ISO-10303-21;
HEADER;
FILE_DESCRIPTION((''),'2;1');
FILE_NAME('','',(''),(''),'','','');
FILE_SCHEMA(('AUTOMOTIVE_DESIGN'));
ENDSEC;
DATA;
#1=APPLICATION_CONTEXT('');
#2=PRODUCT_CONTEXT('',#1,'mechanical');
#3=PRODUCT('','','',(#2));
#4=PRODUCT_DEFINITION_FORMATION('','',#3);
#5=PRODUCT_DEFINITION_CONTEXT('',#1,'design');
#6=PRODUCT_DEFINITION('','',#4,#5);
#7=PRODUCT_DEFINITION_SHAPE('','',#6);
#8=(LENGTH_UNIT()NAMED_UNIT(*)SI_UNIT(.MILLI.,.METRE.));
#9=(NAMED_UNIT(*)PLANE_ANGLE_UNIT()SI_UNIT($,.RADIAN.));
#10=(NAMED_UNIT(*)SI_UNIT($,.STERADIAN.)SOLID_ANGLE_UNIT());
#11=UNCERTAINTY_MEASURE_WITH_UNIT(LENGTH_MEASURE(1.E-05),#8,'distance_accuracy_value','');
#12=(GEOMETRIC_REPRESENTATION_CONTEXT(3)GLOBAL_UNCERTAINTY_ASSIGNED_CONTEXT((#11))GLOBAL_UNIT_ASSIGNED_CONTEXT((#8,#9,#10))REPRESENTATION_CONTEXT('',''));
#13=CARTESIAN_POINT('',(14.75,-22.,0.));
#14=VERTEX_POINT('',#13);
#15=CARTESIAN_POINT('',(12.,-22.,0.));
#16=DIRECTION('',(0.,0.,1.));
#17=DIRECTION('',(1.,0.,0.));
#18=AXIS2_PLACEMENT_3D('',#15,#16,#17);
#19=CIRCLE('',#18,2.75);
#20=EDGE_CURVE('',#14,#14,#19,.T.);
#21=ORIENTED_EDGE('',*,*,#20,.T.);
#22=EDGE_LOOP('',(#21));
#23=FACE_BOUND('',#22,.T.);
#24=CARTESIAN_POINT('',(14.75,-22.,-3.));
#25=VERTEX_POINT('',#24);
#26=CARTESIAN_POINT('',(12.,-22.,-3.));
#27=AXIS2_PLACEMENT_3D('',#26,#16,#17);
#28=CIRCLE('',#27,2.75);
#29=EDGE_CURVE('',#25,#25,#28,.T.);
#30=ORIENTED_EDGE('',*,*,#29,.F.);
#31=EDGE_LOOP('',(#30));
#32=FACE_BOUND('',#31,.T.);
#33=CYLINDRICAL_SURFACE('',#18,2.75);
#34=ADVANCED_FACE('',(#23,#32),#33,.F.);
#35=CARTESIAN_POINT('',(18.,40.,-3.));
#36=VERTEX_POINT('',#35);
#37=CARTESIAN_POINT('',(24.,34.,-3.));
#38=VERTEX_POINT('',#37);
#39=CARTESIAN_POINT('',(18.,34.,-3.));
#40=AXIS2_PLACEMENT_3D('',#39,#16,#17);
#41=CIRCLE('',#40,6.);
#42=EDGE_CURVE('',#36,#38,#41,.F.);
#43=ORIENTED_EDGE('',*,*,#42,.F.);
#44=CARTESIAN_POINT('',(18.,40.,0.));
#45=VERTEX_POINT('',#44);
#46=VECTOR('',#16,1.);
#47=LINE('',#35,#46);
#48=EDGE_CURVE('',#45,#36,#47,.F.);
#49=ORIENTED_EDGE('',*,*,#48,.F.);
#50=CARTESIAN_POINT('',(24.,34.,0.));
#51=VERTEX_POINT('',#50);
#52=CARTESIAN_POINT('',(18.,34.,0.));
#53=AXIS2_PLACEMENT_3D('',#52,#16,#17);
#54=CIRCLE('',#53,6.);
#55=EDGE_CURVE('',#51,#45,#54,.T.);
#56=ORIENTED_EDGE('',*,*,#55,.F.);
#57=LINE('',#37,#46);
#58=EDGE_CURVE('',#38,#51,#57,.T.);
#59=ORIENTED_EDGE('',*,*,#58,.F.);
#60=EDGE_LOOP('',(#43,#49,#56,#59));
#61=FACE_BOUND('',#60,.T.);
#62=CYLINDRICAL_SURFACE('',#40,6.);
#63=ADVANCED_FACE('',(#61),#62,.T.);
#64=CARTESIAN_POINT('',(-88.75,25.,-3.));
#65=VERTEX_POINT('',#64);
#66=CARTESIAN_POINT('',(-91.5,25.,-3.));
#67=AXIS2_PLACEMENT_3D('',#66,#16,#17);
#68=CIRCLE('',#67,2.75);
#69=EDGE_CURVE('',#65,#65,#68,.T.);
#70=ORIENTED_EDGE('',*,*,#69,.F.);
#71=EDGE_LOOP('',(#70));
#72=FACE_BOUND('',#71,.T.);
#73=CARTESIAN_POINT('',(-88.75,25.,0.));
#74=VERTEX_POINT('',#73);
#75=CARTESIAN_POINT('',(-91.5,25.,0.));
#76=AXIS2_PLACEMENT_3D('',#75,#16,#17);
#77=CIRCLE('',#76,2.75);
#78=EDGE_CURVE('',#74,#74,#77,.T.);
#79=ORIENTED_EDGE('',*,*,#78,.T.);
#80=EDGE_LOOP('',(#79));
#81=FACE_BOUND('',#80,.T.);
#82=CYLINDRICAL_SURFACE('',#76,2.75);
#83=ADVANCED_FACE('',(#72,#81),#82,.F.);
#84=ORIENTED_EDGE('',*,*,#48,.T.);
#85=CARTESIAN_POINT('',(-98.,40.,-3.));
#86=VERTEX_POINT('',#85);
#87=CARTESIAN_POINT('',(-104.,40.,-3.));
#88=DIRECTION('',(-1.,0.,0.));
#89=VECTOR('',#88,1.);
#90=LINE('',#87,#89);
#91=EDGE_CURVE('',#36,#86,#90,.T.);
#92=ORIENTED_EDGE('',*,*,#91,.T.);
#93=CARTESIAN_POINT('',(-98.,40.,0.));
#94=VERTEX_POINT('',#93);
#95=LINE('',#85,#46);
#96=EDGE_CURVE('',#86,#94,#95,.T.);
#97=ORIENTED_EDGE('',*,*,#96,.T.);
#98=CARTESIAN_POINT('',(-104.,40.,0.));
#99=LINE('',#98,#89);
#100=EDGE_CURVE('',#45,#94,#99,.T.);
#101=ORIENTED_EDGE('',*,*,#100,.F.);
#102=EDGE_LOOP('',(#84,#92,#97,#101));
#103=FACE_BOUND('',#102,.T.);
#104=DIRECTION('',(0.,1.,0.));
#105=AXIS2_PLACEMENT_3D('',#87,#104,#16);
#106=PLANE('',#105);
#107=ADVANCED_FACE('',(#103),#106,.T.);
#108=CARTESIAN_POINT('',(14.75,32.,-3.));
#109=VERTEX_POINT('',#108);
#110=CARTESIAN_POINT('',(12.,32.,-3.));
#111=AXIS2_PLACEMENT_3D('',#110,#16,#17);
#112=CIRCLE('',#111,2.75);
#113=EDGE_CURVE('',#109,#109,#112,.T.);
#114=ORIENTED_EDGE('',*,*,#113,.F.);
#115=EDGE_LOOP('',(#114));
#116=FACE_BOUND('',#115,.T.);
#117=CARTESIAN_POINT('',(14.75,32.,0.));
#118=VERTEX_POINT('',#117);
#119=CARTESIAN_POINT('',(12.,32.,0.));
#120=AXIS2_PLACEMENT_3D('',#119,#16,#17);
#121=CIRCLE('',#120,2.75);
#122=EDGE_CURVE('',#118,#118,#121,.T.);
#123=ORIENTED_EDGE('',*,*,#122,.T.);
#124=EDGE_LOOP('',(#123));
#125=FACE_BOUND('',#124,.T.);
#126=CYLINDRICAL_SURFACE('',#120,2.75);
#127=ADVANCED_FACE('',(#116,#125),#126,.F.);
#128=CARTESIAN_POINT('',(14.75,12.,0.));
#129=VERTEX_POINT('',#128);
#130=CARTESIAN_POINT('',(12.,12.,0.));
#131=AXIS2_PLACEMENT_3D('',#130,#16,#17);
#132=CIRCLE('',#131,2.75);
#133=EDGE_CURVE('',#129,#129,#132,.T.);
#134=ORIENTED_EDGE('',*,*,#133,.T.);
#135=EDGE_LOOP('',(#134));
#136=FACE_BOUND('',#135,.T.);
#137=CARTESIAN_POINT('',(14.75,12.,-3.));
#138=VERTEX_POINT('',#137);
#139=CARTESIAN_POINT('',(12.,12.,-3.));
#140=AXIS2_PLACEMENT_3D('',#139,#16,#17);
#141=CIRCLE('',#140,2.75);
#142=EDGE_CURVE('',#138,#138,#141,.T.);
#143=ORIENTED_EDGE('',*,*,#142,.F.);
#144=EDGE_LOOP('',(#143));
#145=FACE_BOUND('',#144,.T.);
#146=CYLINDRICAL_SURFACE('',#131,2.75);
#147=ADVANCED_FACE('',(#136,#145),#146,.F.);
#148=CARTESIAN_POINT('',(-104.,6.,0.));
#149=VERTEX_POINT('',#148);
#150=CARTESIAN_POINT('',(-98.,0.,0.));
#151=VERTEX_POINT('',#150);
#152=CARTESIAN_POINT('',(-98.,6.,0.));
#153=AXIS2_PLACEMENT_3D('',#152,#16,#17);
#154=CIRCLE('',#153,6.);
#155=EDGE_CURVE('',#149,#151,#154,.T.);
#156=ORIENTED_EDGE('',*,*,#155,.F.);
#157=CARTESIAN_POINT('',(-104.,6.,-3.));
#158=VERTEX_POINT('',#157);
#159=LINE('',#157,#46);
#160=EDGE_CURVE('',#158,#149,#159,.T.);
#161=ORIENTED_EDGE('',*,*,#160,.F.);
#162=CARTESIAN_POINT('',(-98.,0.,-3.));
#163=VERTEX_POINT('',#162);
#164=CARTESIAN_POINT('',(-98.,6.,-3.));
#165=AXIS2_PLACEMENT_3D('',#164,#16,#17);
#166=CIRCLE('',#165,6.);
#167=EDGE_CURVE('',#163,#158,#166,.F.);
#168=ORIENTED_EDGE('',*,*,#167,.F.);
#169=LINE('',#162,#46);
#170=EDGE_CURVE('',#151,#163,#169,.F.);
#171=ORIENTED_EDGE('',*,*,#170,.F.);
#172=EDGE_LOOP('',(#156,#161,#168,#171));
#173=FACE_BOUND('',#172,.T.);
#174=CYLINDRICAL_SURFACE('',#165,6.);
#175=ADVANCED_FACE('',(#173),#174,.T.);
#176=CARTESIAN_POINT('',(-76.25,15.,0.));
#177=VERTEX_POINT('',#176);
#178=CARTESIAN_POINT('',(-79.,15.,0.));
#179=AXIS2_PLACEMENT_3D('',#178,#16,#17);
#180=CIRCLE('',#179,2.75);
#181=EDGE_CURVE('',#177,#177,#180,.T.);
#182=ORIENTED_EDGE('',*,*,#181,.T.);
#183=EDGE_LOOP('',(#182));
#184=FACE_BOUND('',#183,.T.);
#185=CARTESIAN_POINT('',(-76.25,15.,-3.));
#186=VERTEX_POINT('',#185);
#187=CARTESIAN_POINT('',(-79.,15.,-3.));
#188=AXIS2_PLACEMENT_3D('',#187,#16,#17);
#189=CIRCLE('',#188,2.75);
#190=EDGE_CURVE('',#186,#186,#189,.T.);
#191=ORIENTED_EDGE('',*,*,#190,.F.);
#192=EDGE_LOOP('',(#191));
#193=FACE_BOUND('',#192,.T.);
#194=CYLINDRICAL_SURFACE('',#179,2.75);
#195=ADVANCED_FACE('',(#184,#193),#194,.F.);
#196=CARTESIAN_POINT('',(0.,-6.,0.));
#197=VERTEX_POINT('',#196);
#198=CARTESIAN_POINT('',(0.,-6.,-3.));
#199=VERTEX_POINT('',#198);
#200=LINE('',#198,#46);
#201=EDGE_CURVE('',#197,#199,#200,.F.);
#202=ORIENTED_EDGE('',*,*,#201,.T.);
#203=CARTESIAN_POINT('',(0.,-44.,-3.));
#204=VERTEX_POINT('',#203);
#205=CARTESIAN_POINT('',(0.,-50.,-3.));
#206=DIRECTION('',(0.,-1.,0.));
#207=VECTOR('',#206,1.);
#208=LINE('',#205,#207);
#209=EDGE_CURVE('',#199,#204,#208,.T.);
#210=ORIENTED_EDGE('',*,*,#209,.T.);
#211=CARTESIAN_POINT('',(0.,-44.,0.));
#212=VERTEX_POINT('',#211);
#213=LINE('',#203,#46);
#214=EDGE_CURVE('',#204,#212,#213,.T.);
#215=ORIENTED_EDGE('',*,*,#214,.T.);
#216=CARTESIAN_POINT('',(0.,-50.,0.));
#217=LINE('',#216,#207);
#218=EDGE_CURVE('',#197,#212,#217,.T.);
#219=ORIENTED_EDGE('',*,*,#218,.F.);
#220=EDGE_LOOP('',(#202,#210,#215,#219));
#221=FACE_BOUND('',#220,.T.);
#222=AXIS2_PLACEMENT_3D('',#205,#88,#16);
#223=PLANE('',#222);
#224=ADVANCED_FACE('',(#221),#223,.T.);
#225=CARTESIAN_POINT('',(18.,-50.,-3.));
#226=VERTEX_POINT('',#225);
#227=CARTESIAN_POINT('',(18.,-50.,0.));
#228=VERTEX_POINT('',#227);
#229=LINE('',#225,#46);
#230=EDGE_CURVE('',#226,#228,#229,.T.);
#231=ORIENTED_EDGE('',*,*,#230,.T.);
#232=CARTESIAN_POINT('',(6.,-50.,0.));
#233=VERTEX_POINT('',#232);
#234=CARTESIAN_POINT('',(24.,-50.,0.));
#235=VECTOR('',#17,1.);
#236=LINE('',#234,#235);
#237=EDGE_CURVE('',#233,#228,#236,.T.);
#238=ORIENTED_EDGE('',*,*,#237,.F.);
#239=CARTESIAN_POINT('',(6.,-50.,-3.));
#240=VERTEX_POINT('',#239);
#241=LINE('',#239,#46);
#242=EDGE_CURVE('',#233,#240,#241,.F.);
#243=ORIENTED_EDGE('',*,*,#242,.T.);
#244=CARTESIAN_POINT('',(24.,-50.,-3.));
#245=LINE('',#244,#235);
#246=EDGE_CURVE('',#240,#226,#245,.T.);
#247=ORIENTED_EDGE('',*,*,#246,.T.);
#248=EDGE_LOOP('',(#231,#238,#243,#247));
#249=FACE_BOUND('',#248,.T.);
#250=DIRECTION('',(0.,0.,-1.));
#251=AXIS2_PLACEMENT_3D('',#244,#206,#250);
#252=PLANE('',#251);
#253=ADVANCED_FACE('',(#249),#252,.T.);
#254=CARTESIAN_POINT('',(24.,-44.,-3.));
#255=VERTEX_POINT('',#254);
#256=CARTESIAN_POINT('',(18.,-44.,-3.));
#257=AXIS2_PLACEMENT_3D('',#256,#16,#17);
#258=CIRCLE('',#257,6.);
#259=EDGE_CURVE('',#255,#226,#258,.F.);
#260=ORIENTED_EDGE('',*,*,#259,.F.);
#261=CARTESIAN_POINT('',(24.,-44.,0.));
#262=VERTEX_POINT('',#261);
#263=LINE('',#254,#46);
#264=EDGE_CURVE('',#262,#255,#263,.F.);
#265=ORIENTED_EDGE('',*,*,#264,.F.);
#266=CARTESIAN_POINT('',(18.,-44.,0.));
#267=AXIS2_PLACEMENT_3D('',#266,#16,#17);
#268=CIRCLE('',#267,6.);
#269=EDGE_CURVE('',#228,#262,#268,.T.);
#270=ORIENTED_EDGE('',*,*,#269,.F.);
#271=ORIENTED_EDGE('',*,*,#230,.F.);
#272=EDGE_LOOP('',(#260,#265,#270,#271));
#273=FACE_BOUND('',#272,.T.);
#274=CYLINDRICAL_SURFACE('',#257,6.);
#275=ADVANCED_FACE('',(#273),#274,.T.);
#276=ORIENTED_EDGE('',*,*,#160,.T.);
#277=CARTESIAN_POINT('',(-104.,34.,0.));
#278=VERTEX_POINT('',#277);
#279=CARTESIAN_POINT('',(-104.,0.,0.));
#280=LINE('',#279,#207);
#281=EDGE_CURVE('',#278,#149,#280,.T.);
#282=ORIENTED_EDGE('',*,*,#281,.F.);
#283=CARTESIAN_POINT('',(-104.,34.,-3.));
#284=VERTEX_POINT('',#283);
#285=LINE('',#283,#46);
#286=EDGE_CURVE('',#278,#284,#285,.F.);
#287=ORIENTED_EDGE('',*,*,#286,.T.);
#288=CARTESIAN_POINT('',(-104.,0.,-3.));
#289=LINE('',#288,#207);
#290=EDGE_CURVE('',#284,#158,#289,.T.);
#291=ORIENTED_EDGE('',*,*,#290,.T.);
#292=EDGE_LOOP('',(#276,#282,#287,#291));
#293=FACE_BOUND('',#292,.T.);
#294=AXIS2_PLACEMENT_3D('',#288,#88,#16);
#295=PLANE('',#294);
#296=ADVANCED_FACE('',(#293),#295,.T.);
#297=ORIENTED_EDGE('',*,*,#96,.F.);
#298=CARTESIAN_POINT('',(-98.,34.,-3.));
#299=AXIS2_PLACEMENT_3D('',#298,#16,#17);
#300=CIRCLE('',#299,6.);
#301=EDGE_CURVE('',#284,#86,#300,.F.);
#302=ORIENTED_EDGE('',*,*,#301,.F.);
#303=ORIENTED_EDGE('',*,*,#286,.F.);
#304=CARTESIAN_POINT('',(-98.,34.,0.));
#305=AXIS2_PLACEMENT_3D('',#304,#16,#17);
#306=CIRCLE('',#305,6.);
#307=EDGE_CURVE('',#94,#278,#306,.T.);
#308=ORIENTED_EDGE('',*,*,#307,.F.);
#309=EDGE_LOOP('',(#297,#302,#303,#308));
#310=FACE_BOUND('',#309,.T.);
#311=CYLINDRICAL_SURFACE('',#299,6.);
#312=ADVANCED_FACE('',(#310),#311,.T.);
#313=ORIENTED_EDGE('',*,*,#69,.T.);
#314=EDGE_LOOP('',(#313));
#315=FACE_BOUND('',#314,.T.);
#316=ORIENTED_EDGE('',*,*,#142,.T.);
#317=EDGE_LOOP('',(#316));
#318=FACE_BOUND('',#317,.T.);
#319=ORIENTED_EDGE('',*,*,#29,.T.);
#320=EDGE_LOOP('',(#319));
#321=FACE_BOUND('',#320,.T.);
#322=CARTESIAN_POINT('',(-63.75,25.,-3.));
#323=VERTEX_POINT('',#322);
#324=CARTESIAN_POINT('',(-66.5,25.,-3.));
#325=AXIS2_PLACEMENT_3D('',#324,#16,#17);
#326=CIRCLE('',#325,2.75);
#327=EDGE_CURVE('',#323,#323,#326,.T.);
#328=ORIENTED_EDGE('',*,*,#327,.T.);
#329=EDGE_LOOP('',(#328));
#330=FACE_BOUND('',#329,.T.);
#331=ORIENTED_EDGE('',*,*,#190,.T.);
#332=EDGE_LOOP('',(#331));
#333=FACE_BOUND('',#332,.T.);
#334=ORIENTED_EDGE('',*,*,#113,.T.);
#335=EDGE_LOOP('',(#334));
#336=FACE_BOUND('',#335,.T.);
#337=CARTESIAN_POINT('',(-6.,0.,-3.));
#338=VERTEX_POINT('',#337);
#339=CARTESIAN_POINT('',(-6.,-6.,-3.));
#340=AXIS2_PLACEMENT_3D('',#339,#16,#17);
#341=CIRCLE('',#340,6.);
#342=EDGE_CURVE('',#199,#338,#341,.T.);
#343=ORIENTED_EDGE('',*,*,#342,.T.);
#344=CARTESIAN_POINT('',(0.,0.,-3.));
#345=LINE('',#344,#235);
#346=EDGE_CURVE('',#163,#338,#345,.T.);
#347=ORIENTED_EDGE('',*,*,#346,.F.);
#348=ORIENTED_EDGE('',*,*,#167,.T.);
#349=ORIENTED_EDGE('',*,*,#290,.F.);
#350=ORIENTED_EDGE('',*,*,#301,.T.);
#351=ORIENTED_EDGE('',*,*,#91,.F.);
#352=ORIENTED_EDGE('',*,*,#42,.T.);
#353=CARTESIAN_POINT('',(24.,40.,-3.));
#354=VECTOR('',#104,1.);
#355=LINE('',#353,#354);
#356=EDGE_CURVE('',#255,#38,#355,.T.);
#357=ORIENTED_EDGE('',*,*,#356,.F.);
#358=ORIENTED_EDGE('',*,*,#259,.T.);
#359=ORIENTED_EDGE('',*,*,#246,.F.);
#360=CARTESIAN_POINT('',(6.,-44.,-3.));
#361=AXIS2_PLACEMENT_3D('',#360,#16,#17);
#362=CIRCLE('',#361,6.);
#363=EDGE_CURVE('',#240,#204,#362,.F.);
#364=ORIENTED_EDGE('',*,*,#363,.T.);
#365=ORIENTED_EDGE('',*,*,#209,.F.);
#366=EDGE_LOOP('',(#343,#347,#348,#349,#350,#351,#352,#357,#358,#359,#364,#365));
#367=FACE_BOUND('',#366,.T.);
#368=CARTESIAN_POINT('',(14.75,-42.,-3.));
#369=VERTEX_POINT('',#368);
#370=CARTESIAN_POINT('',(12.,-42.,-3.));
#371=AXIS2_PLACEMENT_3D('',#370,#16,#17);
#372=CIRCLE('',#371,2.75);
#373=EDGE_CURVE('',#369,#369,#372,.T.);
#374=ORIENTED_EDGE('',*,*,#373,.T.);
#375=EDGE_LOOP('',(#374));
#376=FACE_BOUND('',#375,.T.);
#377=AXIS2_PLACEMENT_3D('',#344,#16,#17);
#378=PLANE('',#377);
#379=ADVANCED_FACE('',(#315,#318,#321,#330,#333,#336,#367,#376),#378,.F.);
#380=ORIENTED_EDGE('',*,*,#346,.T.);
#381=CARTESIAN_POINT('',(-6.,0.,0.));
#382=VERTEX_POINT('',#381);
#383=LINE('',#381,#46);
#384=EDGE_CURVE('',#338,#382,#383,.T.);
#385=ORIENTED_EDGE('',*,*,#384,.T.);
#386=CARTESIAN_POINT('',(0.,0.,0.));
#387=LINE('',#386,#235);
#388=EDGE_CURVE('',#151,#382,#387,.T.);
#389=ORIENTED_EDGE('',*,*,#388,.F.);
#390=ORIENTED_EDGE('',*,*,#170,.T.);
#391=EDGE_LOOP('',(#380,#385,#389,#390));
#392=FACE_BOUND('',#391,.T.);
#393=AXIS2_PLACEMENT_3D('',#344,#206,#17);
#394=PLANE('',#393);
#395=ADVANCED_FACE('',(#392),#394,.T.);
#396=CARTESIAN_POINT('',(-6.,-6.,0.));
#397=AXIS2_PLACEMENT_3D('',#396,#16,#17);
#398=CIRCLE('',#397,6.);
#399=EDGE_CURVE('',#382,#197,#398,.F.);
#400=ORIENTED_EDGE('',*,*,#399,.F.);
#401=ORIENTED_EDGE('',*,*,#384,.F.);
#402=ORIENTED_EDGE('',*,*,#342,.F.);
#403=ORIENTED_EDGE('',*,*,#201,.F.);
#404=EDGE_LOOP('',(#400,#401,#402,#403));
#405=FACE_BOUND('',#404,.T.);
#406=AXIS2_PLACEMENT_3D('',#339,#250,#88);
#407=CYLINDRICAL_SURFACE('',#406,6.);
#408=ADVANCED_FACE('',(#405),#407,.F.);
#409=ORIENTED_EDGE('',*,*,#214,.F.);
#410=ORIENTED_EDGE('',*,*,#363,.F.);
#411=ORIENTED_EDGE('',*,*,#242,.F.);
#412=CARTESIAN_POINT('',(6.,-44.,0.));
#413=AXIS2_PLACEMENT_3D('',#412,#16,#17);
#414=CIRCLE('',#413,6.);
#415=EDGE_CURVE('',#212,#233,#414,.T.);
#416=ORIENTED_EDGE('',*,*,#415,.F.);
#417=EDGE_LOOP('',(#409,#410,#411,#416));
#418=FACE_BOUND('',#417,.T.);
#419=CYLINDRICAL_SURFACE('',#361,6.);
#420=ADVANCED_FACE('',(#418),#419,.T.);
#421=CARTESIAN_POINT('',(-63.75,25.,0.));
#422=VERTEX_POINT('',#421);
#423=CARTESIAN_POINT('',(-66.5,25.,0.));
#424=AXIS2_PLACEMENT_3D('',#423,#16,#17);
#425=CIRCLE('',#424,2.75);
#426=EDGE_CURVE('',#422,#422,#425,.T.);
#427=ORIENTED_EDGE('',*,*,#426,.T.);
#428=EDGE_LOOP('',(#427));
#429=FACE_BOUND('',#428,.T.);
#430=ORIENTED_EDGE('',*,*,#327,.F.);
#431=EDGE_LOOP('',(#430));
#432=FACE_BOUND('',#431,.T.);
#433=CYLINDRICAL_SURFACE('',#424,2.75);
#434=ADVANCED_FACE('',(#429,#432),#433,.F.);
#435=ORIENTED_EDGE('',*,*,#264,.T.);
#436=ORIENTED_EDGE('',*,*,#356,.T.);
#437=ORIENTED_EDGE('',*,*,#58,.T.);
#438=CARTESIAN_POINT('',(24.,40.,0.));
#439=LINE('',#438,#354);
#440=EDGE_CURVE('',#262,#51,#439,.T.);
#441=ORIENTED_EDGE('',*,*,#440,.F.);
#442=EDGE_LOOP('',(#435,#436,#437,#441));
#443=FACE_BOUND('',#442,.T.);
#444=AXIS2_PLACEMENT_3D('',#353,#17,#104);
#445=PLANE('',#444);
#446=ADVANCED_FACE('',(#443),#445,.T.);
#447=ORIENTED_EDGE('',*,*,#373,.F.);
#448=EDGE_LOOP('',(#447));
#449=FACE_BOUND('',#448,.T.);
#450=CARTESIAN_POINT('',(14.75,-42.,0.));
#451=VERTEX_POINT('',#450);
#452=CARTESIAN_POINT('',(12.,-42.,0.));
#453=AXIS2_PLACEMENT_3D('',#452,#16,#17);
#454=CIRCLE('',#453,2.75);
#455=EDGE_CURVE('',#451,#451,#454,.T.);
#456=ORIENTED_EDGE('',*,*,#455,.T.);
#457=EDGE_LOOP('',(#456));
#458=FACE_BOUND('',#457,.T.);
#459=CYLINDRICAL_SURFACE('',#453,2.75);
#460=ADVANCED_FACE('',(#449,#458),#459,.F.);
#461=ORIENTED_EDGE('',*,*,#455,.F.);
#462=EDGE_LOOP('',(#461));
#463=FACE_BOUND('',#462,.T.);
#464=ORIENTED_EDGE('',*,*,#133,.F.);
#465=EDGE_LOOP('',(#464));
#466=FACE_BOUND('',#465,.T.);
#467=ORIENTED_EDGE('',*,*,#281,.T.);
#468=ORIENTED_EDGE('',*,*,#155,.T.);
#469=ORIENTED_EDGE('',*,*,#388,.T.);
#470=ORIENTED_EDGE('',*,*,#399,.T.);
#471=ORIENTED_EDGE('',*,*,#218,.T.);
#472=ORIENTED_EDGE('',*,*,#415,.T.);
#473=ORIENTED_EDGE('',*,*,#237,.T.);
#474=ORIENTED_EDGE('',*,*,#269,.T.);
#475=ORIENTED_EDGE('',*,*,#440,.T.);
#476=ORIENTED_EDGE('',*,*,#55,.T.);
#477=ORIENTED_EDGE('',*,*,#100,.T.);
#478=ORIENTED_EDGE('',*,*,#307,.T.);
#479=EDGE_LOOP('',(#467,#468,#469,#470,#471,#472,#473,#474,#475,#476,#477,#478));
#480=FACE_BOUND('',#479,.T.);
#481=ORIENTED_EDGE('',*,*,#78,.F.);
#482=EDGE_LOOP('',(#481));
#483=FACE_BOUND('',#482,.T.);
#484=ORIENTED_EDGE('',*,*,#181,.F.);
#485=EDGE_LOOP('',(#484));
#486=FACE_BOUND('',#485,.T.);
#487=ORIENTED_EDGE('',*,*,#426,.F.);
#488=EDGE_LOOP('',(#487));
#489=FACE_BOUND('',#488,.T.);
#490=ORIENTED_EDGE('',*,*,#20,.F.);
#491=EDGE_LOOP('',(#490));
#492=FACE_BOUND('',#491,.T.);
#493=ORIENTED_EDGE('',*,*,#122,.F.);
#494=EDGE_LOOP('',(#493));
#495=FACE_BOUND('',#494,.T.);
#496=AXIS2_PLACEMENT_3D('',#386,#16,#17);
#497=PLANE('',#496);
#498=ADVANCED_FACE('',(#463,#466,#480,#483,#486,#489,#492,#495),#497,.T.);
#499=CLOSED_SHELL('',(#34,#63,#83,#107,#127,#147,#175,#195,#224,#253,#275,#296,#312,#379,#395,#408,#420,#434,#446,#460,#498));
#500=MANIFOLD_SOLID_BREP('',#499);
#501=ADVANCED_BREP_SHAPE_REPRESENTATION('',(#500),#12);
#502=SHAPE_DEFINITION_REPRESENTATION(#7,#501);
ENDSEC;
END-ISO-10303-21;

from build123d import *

# Parameters (mm, degrees)
ODGI_CIE_BAZOWE1_DEPTH = 3
OTW_R_POD_RUB_M51_D    = 5.5
ZAOKR_GLENIE1_R        = 6


# Sheet-metal steps are written as plain solids
with BuildPart() as part:
    # Szkic1 → Odgięcie bazowe1 (new body)
    with BuildSketch(Plane.XY):
        Polygon((0, 0), (-104, 0), (-104, 40), (24, 40), (24, -50), (0, -50), align=None)
    extrude(amount=-ODGI_CIE_BAZOWE1_DEPTH)

    # Otwór pod śrubę M51 (through all)
    with Locations(Plane.XY):
        with Locations((12, -42), (12, -22), (12, 12), (12, 32), (-91.5, 25), (-66.5, 25), (-79, 15)):
            Hole(OTW_R_POD_RUB_M51_D / 2)

    # Zaokrąglenie1
    zaokr_glenie1_edges = [part.edges().sort_by_distance(p)[0] for p in [
        (0, 0, -1.5),
        (-104, 0, -1.5),
        (-104, 40, -1.5),
        (24, 40, -1.5),
        (24, -50, -1.5),
        (0, -50, -1.5),
    ]]
    fillet(zaokr_glenie1_edges, radius=ZAOKR_GLENIE1_R)


solid = part.part
